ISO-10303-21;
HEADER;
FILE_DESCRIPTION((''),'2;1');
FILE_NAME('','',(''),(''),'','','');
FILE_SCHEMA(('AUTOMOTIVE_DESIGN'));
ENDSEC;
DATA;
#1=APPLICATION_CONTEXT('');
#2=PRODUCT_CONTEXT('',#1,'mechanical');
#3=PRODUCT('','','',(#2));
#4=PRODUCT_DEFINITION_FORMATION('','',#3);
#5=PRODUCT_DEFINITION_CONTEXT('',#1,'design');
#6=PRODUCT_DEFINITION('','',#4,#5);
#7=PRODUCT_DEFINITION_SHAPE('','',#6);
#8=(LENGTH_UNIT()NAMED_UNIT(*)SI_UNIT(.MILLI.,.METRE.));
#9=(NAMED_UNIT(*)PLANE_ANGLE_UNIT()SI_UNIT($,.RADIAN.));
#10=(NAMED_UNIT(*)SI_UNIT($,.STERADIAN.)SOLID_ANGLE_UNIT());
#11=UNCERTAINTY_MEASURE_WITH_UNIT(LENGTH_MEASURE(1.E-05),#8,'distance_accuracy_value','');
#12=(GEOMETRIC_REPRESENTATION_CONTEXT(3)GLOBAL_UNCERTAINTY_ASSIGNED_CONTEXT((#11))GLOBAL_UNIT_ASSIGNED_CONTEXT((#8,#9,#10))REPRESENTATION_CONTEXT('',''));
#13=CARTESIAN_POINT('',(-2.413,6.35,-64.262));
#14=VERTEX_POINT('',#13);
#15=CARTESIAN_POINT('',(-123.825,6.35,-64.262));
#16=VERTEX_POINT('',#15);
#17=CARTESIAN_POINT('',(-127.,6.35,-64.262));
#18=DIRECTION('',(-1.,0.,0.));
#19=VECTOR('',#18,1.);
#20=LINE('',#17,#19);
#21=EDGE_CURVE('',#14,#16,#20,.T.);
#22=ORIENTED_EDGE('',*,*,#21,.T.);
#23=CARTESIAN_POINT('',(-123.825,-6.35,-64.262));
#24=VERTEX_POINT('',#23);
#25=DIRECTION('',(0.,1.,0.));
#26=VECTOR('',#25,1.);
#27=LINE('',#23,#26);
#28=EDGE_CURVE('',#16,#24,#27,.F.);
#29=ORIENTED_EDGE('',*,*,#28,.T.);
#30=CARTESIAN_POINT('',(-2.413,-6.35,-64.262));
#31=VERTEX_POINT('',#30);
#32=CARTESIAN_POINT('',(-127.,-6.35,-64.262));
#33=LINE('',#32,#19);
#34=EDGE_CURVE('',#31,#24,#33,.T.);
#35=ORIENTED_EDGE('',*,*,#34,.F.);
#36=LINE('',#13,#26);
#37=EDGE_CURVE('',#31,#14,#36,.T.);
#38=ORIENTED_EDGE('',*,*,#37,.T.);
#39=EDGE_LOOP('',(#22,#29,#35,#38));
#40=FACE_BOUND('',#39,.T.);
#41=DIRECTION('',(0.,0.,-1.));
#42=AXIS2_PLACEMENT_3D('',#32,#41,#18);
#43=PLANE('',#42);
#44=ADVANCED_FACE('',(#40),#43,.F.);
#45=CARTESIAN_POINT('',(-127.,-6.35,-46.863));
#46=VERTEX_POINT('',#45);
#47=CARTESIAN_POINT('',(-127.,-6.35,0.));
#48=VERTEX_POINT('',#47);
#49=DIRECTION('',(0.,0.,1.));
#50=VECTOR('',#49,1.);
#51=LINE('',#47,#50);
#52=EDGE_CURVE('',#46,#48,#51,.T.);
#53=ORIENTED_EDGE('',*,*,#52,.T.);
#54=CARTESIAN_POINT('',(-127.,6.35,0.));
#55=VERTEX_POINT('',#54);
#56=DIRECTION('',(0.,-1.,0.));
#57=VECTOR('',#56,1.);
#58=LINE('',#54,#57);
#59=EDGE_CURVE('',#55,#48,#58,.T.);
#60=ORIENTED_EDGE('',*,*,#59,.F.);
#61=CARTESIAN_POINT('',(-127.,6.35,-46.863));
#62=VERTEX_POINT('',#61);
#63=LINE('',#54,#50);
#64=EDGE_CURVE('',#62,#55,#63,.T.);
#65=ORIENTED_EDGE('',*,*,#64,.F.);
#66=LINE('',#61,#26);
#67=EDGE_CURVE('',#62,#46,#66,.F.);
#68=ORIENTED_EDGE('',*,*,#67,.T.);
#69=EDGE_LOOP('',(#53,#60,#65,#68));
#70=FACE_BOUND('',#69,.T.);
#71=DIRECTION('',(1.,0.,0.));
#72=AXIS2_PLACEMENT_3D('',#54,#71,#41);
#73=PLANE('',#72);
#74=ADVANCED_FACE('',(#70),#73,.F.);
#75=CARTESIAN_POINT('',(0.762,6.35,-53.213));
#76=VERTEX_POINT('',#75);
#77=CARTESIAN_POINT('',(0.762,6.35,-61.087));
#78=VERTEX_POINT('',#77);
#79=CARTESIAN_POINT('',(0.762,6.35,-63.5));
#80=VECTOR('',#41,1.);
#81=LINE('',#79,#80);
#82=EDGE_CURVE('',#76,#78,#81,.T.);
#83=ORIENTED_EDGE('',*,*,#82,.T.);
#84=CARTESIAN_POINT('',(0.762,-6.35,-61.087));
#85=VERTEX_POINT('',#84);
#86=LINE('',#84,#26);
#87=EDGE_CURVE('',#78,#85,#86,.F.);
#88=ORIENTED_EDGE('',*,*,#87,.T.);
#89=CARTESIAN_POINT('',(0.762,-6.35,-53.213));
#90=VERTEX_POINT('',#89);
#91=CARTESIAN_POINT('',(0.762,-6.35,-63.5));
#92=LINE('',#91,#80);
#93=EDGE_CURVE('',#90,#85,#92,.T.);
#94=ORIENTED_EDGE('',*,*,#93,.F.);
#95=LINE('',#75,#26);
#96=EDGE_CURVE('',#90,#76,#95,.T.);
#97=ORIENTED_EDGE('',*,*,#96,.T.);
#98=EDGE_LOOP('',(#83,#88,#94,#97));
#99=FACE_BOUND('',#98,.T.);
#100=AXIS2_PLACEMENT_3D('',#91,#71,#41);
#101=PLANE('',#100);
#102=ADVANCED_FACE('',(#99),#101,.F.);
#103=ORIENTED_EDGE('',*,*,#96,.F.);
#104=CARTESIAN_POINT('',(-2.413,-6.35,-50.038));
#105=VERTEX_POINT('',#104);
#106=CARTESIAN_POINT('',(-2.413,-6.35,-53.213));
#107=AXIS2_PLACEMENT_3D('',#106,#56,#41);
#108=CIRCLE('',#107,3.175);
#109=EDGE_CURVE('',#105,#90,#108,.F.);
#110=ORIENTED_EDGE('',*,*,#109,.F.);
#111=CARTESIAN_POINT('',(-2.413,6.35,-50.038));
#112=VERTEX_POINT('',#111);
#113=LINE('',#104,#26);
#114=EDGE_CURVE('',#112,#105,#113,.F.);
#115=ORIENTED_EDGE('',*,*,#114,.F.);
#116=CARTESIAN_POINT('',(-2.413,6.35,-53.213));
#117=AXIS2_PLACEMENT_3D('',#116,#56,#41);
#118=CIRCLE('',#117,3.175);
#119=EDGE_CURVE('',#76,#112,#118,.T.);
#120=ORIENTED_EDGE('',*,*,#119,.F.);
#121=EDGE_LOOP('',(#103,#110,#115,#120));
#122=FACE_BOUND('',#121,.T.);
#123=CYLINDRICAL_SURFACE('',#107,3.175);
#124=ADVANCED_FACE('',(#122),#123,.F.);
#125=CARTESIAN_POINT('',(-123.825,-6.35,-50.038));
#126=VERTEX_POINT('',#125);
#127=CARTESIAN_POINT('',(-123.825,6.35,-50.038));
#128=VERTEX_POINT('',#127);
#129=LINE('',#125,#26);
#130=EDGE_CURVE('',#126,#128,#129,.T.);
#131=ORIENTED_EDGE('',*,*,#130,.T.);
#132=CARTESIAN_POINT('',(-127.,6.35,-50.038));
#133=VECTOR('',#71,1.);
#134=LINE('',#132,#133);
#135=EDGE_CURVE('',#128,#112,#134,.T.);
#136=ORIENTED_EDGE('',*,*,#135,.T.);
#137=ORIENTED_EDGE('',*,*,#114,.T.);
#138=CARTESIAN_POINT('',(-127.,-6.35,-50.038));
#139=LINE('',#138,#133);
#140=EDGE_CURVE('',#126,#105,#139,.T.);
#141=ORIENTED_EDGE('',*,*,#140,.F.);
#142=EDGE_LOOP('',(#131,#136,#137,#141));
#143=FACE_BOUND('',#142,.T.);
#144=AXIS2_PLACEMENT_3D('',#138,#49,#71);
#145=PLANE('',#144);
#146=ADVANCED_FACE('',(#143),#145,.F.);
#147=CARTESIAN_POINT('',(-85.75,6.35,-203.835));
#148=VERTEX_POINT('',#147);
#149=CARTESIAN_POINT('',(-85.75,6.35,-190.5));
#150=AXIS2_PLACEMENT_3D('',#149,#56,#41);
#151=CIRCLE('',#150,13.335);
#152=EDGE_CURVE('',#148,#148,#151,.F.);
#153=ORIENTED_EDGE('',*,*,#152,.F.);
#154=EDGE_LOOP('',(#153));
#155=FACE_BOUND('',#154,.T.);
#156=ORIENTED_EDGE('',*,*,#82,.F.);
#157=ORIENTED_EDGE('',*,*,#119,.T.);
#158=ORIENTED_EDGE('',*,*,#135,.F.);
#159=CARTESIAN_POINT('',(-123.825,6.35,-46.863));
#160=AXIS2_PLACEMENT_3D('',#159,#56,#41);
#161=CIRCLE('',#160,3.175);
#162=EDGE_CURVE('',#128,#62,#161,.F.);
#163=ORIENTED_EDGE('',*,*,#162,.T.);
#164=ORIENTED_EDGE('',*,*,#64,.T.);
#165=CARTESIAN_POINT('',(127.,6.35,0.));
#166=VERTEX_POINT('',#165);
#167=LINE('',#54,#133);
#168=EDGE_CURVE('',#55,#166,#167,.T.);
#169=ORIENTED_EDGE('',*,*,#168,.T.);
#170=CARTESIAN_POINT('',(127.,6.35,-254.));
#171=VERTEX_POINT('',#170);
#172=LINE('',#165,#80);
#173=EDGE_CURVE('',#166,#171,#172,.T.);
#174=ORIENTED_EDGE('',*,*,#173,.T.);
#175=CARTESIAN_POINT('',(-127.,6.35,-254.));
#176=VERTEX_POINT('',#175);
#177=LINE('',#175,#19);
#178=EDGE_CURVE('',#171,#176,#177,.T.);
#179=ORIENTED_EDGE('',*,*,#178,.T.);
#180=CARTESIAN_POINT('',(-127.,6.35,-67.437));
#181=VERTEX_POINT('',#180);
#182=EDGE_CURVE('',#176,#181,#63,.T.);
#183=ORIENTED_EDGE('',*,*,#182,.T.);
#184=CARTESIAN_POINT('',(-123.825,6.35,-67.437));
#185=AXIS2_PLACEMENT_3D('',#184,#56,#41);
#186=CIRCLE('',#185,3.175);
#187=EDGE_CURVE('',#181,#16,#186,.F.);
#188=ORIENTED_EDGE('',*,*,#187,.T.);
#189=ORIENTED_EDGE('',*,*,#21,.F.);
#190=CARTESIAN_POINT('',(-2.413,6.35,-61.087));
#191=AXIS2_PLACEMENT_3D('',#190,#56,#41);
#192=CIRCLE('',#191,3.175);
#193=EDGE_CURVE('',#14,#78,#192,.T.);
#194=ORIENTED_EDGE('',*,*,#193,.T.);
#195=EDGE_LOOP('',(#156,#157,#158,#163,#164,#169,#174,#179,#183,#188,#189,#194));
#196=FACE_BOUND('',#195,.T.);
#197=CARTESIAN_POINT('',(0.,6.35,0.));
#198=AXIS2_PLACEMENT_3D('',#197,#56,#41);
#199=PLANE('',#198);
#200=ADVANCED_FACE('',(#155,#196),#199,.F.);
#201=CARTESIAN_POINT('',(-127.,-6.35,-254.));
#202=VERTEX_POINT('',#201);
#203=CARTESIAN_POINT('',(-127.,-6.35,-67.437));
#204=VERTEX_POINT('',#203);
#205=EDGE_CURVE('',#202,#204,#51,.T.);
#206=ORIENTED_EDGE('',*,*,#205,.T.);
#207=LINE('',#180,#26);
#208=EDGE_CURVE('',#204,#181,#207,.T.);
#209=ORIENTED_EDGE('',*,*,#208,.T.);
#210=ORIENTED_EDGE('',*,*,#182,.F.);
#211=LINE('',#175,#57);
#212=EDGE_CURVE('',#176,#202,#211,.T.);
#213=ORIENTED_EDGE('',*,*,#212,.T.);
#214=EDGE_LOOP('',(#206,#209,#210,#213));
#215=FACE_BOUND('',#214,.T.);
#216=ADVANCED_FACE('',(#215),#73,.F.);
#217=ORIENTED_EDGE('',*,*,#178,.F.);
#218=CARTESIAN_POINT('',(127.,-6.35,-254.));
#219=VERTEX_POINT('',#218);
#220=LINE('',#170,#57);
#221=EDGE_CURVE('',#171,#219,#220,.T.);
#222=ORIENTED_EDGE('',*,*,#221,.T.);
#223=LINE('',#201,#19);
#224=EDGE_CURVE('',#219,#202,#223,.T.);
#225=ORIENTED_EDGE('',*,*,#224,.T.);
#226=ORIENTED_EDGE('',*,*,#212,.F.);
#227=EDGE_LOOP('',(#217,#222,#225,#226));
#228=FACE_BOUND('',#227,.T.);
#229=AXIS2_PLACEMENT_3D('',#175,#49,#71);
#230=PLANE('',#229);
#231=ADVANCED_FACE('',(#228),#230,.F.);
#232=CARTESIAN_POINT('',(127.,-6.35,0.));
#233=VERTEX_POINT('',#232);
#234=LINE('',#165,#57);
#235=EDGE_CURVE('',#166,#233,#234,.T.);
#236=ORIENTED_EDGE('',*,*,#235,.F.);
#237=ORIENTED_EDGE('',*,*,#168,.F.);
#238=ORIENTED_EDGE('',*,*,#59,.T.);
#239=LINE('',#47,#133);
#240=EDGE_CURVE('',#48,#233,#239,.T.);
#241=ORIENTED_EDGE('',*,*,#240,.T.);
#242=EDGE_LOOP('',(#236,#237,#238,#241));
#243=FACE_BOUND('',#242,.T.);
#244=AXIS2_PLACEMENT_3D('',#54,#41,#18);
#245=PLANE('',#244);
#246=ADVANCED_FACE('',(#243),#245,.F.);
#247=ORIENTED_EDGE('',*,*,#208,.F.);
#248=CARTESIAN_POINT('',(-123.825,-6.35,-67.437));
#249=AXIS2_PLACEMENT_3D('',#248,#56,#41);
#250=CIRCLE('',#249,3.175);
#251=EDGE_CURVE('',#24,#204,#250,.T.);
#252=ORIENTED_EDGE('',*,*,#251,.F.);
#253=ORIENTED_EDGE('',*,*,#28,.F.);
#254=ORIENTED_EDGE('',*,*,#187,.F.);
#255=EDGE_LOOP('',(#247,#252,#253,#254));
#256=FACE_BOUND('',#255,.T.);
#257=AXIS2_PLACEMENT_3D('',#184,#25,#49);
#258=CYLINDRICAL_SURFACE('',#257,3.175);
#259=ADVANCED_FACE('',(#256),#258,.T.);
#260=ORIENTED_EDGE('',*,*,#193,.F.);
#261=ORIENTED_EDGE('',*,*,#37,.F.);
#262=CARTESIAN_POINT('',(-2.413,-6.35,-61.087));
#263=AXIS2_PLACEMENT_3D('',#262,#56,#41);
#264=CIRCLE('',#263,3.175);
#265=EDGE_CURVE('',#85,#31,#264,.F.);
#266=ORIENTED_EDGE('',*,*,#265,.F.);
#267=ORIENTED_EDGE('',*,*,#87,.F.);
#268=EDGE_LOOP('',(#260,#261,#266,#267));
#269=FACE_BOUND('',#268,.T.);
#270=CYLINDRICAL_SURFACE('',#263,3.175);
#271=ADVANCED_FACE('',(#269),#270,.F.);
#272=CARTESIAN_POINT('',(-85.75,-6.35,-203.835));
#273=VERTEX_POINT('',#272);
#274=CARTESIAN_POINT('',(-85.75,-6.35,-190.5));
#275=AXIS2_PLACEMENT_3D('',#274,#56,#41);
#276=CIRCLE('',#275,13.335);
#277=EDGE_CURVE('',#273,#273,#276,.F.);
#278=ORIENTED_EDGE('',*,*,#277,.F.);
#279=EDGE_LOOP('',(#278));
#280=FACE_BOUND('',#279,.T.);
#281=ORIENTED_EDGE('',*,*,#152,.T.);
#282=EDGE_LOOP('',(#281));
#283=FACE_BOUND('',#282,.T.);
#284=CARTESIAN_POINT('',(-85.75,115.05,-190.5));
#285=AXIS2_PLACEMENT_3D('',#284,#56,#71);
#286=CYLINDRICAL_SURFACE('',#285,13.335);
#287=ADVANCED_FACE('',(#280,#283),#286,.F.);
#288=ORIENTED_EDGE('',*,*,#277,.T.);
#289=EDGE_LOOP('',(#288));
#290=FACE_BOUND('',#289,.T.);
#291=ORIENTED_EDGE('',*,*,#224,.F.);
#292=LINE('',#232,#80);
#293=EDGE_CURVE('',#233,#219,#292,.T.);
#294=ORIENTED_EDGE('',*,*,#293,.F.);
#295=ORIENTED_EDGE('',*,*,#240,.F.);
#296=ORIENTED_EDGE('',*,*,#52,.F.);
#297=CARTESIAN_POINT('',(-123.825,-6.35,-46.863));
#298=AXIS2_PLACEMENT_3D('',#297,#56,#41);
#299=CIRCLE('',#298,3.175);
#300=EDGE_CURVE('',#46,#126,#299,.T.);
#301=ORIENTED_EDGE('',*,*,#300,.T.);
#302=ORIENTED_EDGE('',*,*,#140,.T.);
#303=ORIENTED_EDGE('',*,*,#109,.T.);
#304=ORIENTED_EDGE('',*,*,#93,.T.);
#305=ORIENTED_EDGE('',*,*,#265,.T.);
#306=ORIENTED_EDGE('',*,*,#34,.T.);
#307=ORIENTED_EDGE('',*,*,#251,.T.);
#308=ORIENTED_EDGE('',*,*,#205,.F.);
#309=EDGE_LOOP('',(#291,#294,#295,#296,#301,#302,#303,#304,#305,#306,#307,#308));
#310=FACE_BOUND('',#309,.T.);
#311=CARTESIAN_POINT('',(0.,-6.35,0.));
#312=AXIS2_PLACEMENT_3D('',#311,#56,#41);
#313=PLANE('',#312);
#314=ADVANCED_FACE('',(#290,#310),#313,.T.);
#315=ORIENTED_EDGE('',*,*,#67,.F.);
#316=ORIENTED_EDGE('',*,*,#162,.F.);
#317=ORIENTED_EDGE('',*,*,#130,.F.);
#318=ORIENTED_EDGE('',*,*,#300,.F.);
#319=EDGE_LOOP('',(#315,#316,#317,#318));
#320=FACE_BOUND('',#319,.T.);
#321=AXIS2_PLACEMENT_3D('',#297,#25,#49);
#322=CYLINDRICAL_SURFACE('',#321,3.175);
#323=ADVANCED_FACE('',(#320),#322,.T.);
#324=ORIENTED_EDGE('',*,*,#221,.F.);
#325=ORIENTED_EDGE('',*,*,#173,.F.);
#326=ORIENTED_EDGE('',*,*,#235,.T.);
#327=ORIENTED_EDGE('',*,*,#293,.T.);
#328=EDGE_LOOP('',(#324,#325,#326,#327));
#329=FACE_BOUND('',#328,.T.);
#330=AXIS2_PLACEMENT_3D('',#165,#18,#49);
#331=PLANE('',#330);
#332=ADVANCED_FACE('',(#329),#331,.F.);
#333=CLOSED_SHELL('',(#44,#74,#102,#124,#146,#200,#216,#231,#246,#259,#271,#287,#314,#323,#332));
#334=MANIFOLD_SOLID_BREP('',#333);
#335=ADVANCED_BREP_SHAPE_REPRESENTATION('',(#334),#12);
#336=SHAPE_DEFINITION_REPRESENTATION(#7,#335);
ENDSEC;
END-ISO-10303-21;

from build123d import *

# Parameters (mm, degrees)
SKETCH1_W               = 254
SKETCH1_H               = 254
BOSS_EXTRUDE1_DEPTH     = 6.35
CAVITY1_START           = -6.35
CAVITY1_OUTLINE_R       = 12.7
CAVITY1_DEPTH           = 12.7
CUT_EXTRUDE2_DEPTH      = 285.051619429
CUT_EXTRUDE2_DEPTH_BACK = 285.051619429
SKETCH3_W               = 127
SKETCH3_H               = 12.7
MOVE_FACE_SLOT_BY       = 0.762
MOVE_FACE_SLOT_2_BY     = 0.762
MOVE_FACE_SLOT_3_BY     = 0.762
FILLET1_R               = 3.175
MOVE_FACE_HOLE_BY       = 0.635


# Read off the part's stored shape, not the designer's step: Cavity1
with BuildPart() as part:
    # Sketch1 → Boss-Extrude1 (new, symmetric)
    with BuildSketch(Plane(origin=(0, 0, 0), x_dir=(1, 0, 0), z_dir=(0, 1, 0))):
        with Locations((0, 127)):
            Rectangle(SKETCH1_W, SKETCH1_H)
    extrude(amount=BOSS_EXTRUDE1_DEPTH, both=True)

    # Cavity1 outline → Cavity1 (cut)
    with BuildSketch(Plane(origin=(0, 0, 0), x_dir=(1, 0, 0), z_dir=(0, 1, 0)).offset(CAVITY1_START)):
        with Locations((-85.75, 190.5)):
            Circle(CAVITY1_OUTLINE_R)
    extrude(amount=CAVITY1_DEPTH, mode=Mode.SUBTRACT)

    # Sketch3 → Cut-Extrude2 (cut, two sides: drawn at the far end of the back side and taken through both)
    with BuildSketch(Plane(origin=(0, 0, 0), x_dir=(1, 0, 0), z_dir=(0, 1, 0)).offset(-CUT_EXTRUDE2_DEPTH_BACK)):
        with Locations((-63.5, 57.15)):
            Rectangle(SKETCH3_W, SKETCH3_H)
    extrude(amount=CUT_EXTRUDE2_DEPTH + CUT_EXTRUDE2_DEPTH_BACK, mode=Mode.SUBTRACT)

    # Move Face slot: a face moved inward by 0.762
    extrude(part.faces().sort_by_distance((0, 0, -57.15))[0], amount=MOVE_FACE_SLOT_BY, dir=(1, 0, 0), mode=Mode.SUBTRACT)

    # Move Face slot 2: a face moved inward by 0.762
    extrude(part.faces().sort_by_distance((-63.5, 0, -63.5))[0], amount=MOVE_FACE_SLOT_2_BY, dir=(0, 0, -1), mode=Mode.SUBTRACT)

    # Move Face slot 3: a face moved inward by 0.762
    extrude(part.faces().sort_by_distance((-63.5, 0, -50.8))[0], amount=MOVE_FACE_SLOT_3_BY, dir=(0, 0, 1), mode=Mode.SUBTRACT)

    # Fillet1
    fillet1_edges = [part.edges().sort_by_distance(p)[0] for p in [
        (-127, 0, -50.038),
        (-127, 0, -64.262),
        (0.762, 0, -64.262),
        (0.762, 0, -50.038),
    ]]
    fillet(fillet1_edges, radius=FILLET1_R)

    # Move Face hole: a curved face moved inward by 0.635
    add(Solid.thicken(part.faces().sort_by_distance((-98.45, 0, -190.5))[0], -MOVE_FACE_HOLE_BY), mode=Mode.SUBTRACT)


solid = part.part
